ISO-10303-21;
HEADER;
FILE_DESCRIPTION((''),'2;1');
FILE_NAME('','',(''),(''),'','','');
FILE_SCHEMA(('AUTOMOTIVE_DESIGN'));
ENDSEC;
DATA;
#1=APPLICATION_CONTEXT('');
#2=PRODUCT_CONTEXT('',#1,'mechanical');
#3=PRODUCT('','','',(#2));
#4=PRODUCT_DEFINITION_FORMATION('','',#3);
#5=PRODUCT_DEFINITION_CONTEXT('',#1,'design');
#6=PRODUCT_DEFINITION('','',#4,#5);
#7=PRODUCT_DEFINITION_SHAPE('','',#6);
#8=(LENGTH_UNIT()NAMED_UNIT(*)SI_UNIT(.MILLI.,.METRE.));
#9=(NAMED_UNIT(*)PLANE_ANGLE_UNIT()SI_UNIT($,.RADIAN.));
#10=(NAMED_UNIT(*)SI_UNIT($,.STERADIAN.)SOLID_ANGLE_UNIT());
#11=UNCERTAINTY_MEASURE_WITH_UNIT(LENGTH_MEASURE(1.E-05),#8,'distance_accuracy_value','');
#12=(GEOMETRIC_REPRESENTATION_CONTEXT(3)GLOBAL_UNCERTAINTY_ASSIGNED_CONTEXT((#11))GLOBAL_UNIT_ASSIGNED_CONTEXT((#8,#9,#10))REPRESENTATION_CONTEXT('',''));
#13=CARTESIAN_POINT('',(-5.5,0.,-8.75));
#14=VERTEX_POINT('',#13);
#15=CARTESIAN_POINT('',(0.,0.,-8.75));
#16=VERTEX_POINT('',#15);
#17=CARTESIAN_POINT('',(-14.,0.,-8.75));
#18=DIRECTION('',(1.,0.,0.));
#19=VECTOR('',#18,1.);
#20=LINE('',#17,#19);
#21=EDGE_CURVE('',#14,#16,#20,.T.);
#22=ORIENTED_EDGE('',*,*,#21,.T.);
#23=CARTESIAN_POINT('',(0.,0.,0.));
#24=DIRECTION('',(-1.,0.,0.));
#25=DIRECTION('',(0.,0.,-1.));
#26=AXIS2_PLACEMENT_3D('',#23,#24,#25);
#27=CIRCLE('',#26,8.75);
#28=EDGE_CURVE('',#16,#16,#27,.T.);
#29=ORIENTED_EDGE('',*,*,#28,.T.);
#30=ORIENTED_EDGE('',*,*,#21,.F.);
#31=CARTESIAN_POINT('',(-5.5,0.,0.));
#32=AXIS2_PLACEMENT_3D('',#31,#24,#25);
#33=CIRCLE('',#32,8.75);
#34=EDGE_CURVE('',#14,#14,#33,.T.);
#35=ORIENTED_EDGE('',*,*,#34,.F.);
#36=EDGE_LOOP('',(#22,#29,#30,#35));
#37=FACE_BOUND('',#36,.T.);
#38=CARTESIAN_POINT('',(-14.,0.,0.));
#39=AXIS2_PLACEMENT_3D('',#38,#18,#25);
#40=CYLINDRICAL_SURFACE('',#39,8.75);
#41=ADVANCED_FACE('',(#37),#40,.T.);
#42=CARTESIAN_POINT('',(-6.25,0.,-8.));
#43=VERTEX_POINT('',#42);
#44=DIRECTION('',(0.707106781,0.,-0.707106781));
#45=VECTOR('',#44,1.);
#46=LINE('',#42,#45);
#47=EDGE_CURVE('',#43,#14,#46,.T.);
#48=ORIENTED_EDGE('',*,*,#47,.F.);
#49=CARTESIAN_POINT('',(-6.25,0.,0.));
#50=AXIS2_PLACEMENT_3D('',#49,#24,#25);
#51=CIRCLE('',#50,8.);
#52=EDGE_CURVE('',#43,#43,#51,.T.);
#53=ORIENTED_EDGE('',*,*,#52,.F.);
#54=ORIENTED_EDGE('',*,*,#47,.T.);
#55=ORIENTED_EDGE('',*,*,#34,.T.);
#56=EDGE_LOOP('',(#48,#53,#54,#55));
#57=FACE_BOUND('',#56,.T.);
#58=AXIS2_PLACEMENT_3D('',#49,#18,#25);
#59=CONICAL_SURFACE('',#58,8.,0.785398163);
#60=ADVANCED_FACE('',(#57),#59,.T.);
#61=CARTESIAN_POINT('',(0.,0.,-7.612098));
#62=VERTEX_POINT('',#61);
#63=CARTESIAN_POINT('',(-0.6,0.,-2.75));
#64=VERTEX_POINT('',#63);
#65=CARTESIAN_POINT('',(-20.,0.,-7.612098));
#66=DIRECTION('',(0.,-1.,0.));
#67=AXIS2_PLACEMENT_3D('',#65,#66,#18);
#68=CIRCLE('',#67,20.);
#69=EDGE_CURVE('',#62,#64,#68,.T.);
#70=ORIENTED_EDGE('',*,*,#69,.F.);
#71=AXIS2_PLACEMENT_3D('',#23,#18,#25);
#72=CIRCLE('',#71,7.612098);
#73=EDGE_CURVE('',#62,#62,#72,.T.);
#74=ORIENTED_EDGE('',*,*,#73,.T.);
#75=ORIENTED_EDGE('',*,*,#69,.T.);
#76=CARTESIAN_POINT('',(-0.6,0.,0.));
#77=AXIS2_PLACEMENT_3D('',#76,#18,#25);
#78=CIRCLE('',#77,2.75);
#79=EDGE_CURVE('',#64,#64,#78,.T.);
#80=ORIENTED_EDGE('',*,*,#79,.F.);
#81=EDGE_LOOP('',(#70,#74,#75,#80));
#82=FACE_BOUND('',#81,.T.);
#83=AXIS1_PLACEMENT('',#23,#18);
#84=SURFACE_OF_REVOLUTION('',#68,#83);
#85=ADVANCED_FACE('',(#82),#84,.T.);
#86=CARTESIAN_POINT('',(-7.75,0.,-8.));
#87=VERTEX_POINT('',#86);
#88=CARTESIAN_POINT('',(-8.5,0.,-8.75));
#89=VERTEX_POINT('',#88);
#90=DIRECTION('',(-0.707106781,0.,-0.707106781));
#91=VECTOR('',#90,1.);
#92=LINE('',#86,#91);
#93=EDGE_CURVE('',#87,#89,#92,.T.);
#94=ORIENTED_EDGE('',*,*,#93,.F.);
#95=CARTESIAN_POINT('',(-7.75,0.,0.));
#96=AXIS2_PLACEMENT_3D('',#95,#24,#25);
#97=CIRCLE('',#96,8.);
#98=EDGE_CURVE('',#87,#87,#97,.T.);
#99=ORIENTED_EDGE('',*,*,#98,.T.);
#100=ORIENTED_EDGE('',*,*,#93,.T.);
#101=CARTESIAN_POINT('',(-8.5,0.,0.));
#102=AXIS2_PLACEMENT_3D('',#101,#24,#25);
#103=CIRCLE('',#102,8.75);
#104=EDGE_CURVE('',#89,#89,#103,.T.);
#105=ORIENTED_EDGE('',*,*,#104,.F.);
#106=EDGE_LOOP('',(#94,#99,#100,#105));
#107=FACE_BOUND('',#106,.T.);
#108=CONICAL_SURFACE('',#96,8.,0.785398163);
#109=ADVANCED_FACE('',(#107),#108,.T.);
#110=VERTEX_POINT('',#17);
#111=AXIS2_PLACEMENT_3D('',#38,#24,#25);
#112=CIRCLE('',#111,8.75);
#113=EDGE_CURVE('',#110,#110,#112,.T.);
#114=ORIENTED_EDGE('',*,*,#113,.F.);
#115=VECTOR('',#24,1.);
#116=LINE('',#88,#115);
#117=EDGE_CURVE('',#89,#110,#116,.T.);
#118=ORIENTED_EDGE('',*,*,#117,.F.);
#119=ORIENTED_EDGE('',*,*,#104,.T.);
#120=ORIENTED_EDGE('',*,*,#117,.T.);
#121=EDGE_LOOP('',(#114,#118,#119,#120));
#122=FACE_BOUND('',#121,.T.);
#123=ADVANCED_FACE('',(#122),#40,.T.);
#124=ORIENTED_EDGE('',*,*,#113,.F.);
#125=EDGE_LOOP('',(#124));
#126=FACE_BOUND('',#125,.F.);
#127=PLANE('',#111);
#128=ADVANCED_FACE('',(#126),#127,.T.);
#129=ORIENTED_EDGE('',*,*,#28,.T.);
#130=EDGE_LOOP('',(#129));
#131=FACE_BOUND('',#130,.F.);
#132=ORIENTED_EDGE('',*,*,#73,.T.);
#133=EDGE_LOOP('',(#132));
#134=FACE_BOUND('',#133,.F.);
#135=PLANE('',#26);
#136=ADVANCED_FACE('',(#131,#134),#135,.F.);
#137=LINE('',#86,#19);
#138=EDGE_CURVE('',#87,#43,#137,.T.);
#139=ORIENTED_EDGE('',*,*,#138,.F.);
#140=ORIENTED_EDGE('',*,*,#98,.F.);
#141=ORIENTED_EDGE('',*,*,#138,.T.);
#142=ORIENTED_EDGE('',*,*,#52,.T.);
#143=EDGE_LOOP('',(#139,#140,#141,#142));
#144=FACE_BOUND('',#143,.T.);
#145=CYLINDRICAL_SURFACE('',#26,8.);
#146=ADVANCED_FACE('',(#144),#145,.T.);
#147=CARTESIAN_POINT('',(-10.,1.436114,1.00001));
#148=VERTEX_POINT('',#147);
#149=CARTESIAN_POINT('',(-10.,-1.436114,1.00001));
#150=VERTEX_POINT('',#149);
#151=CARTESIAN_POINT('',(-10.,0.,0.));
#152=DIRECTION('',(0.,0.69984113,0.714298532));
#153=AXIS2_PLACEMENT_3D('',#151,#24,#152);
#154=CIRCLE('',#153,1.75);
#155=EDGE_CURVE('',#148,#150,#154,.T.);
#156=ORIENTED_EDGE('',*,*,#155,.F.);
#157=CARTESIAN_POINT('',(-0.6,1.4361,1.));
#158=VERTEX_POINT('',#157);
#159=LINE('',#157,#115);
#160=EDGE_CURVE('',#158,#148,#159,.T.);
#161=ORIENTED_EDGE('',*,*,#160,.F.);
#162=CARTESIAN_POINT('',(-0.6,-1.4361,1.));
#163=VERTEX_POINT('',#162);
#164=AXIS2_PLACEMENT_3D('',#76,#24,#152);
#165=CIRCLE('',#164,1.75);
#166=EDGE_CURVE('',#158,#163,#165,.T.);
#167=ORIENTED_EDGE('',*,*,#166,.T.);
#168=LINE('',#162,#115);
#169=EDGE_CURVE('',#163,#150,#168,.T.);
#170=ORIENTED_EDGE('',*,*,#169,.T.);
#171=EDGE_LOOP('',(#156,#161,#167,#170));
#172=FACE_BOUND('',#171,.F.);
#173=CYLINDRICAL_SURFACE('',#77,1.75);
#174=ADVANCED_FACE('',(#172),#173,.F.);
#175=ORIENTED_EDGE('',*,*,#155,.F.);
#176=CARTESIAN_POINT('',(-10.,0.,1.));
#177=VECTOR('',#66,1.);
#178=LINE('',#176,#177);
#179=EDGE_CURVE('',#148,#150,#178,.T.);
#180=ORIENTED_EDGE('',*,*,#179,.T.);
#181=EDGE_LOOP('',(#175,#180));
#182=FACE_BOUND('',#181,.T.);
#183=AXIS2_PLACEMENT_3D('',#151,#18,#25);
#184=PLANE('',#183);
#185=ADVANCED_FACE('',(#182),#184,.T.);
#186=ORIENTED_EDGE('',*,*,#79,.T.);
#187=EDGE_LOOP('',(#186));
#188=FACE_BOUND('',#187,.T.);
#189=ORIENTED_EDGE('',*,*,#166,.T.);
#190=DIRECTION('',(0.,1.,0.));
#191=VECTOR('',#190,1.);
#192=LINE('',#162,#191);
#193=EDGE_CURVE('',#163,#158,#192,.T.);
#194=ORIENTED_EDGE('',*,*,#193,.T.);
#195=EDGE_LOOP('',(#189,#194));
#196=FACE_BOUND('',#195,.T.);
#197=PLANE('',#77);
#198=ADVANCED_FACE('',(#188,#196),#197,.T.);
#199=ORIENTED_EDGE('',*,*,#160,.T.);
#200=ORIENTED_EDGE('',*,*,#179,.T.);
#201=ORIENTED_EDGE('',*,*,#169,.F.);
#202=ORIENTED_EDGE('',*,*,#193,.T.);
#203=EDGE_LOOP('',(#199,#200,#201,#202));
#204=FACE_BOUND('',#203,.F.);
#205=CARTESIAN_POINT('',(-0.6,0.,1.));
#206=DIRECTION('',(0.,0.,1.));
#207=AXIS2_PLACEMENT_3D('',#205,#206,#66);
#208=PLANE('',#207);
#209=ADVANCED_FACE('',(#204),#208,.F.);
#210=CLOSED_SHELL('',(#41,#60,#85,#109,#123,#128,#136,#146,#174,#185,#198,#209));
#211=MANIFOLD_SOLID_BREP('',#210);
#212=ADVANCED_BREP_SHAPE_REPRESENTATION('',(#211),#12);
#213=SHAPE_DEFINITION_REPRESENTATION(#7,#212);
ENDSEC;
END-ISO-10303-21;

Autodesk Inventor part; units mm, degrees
ref_plane "YZ Plane" through (0, 0, 0) normal (1, 0, 0) x (0, 1, 0)
ref_plane "XZ Plane" through (0, 0, 0) normal (0, 1, 0) x (-1, 0, 0)
ref_plane "XY Plane" through (0, 0, 0) normal (0, 0, 1) x (1, 0, 0)
sketch "Sketch1" plane through (0, 0, 0) normal (0, 1, 0) x (-1, 0, 0)
  line L0 (0, 0) -> (14, 0)
  line L1 (14, 0) -> (14, -8.75)
  line L2 (14, -8.75) -> (0, -8.75)
  line L3 (0, -8.75) -> (0, 0)
  line L4 (14, 0) -> (0, 0)
  line L5 (0, 0) -> (0, -8)
  line L6 (0, -8) -> (14, -8)
  line L7 (14, -8) -> (14, 0)
  line L8 (0, -8.75) -> (5.5, -8.75)
  line L9 (14, -8.75) -> (8.5, -8.75)
  line L10 (8.5, -8.75) -> (8.5, -4)
  line L11 (5.5, -8.75) -> (5.5, -4)
  line L12 (5.5, -8) -> (7, -8)
  line L13 (5.5, -8) -> (6.25, -8)
  line L14 (8.5, -8) -> (7, -8)
  line L15 (8.5, -8) -> (7.75, -8)
  line L16 (7.75, -8) -> (8.5, -8.75)
  line L17 (6.25, -8) -> (5.5, -8.75)
  dimension "d0" = 14
  dimension "d1" = 8.75
  dimension "d2" = 8
  dimension "d3" = 5.5
  dimension "d4" = 5.5
revolve "Revolution1" add sketch "Sketch1" angle 360 about axis through (0, 0, 0) along (-1, 0, 0) contours L0 L1 L6 L3 | L6 L11 L2 L3 | L1 L2 L10 L6 | L6 L17 L11 | L10 L16 L6
sketch "Sketch2" plane through (0, 0, 0) normal (1, 0, 0) x (0, 0, -1)
  circle A0 centre (0, 0) radius 1.5
  line L0 (-1.5, 0) -> (-1, 0)
  line L1 (-1, 0) -> (-1, 1.118)
  line L2 (-1, 0) -> (-1, -1.118)
  circle A1 centre (0, 0) radius 2.75
  dimension "d6" = 3
  dimension "d7" = 0.5
  dimension "d8" = 5.5
extrude "Extrusion1" cut sketch "Sketch2" against normal blind 10 contours A0 L2 L1
extrude "Extrusion2" cut sketch "Sketch2" against normal blind 0.6 contours L1 L0 A0 | A0 L0 L2 | A1
fillet "Fillet1" radius 20 1 edges at (0, 0, 2.75)
sketch "Sketch3" plane through (-14, 0, 0) normal (-1, 0, 0) x (0, 0, 1)
  circle A0 centre (0, 0) radius 8.75 projected
  line L0 (0, -8.75) -> (0, -6.75)
  line L1 (0, 8.75) -> (0, 6.75)
  circle A1 centre (0, 0) radius 6.75
  dimension "d14" = 2
  dimension "d15" = 2
extrude "Extrusion3" cut sketch "Sketch3" against normal blind 1 contours A1
fillet "Fillet2" radius 0.5 1 edges at (-14, 0, -6.75)
sketch "Sketch4" plane through (-0.6, 0, 0) normal (1, 0, 0) x (0, 0, -1)
  circle A0 centre (0, 0) radius 2.75 projected
  line L0 (-1, 1.118) -> (-1, -1.118) projected
  arc A1 (-1, -1.118) -> (-1, 1.118) centre (0, 0) ccw projected
  line L1 (1.5, 0) -> (1.6492, 0)
  line L2 (1.5, 0) -> (1.75, 0)
  circle A2 centre (0, 0) radius 1.75
  line L3 (-1, 1.118) -> (-1, -1.118) projected
  line L4 (-1, 0) -> (-1.25, 0)
  line L5 (-1.25, 0) -> (-1.25, 1.2247)
  line L6 (-1.25, 0) -> (-1.25, -1.2247)
  dimension "d19" = 0.25
  dimension "d20" = 0.25
extrude "Extrusion4" cut sketch "Sketch4" against normal blind 9.4 contours L0 L4 L5 A2 L2 L1 A1 | L0 A1 L1 L2 A2 L6 L4
sketch "Sketch5" plane through (-14, 0, 0) normal (-1, 0, 0) x (0, 0, 1)
  circle A0 centre (0, 0) radius 8.75 projected
  circle A1 centre (0, 0) radius 7.25 projected
  circle A2 centre (0, 0) radius 8.75
extrude "Extrusion5" add sketch "Sketch5" against normal blind 1 contours A0 | A1
sketch "Sketch6" plane through (-0.6, 0, 0) normal (1, 0, 0) x (0, 0, -1)
  arc A0 (-1.25, -1.2247) -> (-1.25, 1.2247) centre (0, 0) ccw projected
  line L0 (-1.25, -1.2247) -> (-1.25, 1.2247) projected
  circle A1 centre (0, 0) radius 2.75 projected
  circle A2 centre (0, 0) radius 1.75
  line L1 (-1.25, -1.2247) -> (-1.25, 1.2247) projected
  line L2 (-1.25, 0) -> (-1, 0)
  line L3 (-1, 0) -> (-1, -1.4361)
  arc A3 (-1.25, -1.2247) -> (-1.25, 1.2247) centre (0, 0) ccw projected
  line L4 (-1, 0) -> (-1, 1.4361)
  dimension "d25" = 0.25
extrude "Extrusion6" add sketch "Sketch6" against normal blind 10 contours L0 L2 L3 A0 | L0 A0 L4 L2
properties part number "KÓŁKO_STEFAN"
